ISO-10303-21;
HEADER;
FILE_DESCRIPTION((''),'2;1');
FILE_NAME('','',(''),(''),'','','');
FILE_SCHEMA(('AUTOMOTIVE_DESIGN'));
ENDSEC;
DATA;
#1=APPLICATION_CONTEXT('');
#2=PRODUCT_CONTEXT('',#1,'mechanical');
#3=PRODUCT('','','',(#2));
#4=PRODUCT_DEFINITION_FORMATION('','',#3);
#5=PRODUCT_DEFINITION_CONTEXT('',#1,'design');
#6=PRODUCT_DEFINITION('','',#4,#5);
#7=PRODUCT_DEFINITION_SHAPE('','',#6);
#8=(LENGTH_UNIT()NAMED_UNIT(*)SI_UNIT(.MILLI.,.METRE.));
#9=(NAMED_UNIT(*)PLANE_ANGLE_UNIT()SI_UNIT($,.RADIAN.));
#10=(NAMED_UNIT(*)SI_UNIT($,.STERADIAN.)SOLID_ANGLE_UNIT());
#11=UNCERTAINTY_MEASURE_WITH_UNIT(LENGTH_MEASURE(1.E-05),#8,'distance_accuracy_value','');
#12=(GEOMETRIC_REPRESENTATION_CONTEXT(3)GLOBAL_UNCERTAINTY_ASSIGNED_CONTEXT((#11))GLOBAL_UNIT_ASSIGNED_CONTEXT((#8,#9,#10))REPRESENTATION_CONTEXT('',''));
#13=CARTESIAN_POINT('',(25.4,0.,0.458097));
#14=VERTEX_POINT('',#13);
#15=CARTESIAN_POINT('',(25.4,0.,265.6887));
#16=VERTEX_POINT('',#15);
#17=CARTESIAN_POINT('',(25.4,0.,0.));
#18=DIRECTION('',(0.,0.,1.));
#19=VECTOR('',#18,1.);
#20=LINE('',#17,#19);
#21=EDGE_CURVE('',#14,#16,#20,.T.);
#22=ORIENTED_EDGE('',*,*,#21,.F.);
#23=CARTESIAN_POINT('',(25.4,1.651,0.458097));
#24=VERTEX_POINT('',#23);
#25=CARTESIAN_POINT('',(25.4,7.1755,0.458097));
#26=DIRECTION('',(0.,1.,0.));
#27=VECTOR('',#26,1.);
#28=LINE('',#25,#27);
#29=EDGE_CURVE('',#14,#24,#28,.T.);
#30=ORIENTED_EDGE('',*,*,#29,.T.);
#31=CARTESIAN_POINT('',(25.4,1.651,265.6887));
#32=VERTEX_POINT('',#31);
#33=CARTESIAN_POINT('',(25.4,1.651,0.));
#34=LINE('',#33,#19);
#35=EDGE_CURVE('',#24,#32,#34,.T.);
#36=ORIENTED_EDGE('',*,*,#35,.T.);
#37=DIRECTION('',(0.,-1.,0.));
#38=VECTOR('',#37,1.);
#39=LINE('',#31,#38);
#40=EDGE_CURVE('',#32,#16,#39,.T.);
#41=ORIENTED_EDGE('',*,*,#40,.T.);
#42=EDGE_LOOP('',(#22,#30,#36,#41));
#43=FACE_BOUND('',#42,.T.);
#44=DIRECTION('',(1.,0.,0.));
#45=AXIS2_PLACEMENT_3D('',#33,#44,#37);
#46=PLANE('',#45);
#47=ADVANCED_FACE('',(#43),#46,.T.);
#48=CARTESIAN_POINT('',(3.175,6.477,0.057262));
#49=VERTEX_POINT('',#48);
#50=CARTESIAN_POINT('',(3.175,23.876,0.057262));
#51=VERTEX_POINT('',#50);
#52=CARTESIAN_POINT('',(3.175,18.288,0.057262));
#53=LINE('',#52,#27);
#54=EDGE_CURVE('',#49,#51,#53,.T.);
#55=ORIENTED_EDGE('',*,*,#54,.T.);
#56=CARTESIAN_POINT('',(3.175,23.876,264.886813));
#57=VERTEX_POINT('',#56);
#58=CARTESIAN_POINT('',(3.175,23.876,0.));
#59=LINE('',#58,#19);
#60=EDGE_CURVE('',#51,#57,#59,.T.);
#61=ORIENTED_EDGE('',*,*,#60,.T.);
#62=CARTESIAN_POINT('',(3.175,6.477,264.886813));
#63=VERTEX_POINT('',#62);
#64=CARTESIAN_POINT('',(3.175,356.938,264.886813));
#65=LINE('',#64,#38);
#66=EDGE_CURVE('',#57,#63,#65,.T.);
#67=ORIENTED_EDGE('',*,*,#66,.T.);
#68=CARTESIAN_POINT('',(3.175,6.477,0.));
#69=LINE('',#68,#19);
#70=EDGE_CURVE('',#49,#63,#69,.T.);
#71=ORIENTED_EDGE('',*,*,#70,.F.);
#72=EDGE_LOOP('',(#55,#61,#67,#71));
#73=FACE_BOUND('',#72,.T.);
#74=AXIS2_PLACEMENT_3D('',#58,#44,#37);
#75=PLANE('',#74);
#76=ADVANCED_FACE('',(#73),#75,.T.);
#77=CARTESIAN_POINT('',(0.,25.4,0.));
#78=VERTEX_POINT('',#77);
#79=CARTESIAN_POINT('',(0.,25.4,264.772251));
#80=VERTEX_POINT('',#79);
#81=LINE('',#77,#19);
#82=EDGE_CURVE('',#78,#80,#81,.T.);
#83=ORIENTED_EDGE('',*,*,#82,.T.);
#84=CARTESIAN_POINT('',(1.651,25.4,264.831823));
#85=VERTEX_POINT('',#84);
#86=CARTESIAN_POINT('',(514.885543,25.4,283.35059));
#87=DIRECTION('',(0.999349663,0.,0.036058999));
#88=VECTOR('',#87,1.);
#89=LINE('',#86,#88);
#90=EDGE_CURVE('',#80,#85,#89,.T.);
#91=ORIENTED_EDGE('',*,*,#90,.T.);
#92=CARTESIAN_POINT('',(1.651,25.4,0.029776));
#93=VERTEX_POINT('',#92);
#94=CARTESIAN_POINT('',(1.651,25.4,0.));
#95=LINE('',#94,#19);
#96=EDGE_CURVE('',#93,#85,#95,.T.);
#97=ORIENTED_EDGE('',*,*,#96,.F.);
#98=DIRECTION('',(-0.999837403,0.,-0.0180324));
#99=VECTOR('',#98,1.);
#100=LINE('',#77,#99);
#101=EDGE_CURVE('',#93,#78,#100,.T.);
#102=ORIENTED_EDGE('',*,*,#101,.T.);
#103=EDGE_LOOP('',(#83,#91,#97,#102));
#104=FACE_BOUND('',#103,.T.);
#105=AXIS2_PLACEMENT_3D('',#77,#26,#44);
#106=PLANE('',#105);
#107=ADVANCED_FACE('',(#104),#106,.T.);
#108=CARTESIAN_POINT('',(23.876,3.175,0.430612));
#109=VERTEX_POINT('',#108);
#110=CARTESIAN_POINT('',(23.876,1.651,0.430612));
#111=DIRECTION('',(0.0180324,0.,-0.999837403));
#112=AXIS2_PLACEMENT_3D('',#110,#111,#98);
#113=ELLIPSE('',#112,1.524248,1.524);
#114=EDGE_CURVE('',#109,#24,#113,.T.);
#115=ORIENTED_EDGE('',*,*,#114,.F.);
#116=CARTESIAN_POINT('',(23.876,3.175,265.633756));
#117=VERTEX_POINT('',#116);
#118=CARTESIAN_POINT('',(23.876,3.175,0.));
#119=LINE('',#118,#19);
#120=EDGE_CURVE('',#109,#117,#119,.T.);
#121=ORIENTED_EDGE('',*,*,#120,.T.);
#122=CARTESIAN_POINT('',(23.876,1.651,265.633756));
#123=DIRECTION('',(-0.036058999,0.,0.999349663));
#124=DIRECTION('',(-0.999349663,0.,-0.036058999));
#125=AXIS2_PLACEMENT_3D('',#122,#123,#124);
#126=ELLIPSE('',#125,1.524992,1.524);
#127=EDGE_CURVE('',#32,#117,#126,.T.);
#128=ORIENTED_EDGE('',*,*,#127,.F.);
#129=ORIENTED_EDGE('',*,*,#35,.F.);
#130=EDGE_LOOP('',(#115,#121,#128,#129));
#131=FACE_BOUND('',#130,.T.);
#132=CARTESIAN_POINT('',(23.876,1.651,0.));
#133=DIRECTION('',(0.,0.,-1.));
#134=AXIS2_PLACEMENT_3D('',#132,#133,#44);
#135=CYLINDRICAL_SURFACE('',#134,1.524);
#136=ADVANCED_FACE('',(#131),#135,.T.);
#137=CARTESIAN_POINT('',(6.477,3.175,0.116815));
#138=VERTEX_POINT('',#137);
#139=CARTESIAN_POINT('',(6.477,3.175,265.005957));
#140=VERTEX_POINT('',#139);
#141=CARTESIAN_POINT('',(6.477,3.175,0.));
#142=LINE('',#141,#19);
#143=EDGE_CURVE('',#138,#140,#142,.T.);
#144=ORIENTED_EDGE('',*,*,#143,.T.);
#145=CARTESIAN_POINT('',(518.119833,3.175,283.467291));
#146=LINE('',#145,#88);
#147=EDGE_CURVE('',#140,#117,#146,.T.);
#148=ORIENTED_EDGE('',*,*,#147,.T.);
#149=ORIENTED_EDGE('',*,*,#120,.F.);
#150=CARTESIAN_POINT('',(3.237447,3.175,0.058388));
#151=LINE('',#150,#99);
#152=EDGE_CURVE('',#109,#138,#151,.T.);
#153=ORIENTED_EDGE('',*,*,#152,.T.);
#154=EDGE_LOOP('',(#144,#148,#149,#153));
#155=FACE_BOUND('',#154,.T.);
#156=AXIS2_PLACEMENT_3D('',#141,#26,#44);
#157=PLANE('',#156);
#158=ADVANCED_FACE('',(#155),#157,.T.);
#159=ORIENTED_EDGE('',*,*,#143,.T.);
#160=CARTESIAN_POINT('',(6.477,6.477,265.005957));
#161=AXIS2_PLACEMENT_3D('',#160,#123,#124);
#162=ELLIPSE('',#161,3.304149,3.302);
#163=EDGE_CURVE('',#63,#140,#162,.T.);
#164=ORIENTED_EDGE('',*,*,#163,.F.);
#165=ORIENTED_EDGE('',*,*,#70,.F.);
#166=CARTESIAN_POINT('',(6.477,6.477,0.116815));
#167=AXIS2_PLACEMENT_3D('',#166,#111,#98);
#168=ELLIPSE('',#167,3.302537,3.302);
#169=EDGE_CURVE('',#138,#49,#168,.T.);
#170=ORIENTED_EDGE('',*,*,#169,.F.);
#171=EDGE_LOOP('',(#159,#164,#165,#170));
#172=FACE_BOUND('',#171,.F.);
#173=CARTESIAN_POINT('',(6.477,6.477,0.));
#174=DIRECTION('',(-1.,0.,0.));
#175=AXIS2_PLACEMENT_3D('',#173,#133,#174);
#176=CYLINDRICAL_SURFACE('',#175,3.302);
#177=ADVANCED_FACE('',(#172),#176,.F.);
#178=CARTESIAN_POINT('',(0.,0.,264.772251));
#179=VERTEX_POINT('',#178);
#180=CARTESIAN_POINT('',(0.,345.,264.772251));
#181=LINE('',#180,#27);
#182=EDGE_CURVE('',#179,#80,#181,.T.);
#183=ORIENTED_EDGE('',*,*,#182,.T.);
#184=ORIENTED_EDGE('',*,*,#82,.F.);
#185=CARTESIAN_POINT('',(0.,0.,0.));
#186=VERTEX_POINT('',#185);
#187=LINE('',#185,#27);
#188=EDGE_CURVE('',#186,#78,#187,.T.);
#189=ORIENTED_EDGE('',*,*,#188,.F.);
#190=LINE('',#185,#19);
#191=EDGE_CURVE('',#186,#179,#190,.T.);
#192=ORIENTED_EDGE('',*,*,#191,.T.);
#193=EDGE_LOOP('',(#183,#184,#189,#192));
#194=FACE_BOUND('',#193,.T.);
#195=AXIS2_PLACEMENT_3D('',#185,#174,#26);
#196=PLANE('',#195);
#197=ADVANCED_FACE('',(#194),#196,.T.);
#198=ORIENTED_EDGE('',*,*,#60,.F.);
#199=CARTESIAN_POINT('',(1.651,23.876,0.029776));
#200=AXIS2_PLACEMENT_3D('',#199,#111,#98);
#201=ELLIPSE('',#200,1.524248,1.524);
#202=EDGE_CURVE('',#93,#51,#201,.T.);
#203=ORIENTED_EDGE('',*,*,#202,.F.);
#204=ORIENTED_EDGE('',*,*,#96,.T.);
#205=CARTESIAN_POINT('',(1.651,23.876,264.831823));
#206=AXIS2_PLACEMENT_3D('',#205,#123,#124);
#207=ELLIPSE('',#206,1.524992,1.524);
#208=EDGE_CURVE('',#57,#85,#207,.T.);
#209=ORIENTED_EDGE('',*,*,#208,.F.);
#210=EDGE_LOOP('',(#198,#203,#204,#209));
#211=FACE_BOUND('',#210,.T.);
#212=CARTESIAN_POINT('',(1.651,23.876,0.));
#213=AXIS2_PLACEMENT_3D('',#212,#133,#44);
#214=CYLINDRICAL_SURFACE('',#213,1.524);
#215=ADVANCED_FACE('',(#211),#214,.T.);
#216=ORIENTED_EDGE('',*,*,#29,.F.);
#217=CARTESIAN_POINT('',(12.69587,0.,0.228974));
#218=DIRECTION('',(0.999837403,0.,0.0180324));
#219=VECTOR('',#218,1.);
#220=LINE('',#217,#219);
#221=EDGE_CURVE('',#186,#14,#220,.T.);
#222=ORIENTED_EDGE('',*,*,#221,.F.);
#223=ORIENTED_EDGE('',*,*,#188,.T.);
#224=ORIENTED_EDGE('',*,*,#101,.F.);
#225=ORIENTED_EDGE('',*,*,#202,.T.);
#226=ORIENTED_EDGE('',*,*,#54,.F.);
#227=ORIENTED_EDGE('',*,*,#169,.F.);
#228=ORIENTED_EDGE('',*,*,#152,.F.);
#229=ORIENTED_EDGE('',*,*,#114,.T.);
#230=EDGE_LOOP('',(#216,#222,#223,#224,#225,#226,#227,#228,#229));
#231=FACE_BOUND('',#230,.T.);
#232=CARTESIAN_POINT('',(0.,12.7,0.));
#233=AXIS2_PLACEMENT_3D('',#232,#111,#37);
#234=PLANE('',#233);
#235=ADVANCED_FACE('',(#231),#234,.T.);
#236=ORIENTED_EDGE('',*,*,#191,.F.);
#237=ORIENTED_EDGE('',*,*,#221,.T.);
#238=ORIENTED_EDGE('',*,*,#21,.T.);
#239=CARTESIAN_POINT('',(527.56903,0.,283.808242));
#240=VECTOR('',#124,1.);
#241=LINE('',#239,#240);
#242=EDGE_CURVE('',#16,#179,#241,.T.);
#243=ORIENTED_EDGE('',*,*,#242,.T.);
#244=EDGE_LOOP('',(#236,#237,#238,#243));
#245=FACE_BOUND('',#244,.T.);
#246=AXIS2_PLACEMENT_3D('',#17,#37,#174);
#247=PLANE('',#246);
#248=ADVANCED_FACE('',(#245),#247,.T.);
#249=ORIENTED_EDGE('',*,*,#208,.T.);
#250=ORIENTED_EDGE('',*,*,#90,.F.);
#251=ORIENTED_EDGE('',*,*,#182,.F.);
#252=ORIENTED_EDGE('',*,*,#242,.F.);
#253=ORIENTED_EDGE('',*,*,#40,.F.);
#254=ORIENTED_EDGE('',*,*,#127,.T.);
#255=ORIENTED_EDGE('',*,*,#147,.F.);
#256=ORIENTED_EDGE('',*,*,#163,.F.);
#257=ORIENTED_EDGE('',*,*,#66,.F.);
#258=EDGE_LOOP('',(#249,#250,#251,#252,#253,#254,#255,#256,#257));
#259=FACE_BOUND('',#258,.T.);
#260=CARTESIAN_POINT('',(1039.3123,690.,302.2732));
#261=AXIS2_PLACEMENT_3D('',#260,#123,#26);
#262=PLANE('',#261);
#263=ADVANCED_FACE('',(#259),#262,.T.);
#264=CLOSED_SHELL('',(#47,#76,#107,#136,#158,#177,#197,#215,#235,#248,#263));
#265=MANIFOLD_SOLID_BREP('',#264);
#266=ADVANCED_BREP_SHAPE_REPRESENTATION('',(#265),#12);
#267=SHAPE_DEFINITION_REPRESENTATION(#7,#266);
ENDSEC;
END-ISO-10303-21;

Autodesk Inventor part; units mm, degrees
ref_plane "Start Plane" through (0, 0, 0) normal (0, 0, 1) x (1, 0, 0)
ref_plane "End Plane" through (0, 0, 265.6887) normal (0, 0, 1) x (1, 0, 0)
sketch "Sketch" plane through (0, 0, 0) normal (0, 0, 1) x (1, 0, 0)
  line L0 (25.4, 0) -> (0, 0)
  line L1 (0, 0) -> (0, 25.4)
  line L2 (0, 25.4) -> (1.651, 25.4)
  line L3 (3.175, 23.876) -> (3.175, 6.477)
  line L4 (6.477, 3.175) -> (23.876, 3.175)
  line L5 (25.4, 1.651) -> (25.4, 0)
  line L6 (0, -11.0414) -> (0, 31.5385) construction
  line L7 (-11.0414, 0) -> (31.5385, 0) construction
  arc A0 (3.175, 6.477) -> (6.477, 3.175) centre (6.477, 6.477) ccw
  arc A1 (3.175, 23.876) -> (1.651, 25.4) centre (1.651, 23.876) ccw
  arc A2 (25.4, 1.651) -> (23.876, 3.175) centre (23.876, 1.651) ccw
  line L8 (0, 40.0545) -> (0, -19.5574) construction
  line L9 (-19.5574, 0) -> (40.0545, 0) construction
  point P0 (3.175, 25.4)
  point P1 (3.175, 3.175)
  point P2 (25.4, 3.175)
  dimension "d0" = 25.4
  dimension "d1" = 25.4
  dimension "d2" = 3.175
  dimension "d3" = 3.175
  dimension "d10" = 0
  dimension "d11" = 0
  dimension "d14" = 3.302
  dimension "d15" = 1.524
extrude "Body" add sketch "Sketch" along normal up to surface (265.6887 mm away) from surface at 0
sketch "Sketch3" plane through (0, 0, 0) normal (0, 0, 1) x (1, 0, 0)
  line L0 (0, 0) -> (10, 0)
ref_plane "Work Plane3" through (0, 0, 0) normal (0, -1, 0) x (1, 0, 0)
ref_plane "Work Plane4" through (0, 12.7, 0) normal (0.0180324, 0, -0.9998374) x (-0.9998374, 0, -0.0180324)
split "Split1" plane through (0, 12.7, 0) removes the side toward (0.0180324, 0, -0.9998374)
ref_plane "Work Plane5" through (1039.3123, 690, 302.2732) normal (-0.036059, 0, 0.9993497) x (0.9993497, 0, 0.036059)
split "Split2" plane through (1039.3123, 690, 302.2732) removes the side toward (-0.036059, 0, 0.9993497)
sketch "Sketch4" plane through (0, 0, 0) normal (0, -1, 0) x (1, 0, 0)
  line L0 (-2, 0) -> (12, 0) projected
  line L1 (-2, 265.6887) -> (12, 265.6887) projected
  dimension "d17" = 265.6887
equation "\"d0\" = G_H"
equation "\"d1\" = G_H"
equation "\"d2\" = G_T"
equation "\"d3\" = G_T"
equation "\"d14\" = G_IR"
equation "\"d15\" = G_ER"
equation "\"d4\" = G_L"
equation "\"G_H\" = 25.4"
equation "\"G_T\" = 3.175"
equation "\"G_ER\" = 1.524"
equation "\"G_IR\" = 3.302"
equation "\"G_L\" = d17"
equation "\"ex\" = 0"
equation "\"G_OFFSET_START\" = 0"
equation "\"G_OFFSET_END\" = -24.50003"
equation "\"d13\" = G_OFFSET_END + B_L"
equation "\"B_L\" = 290.18872"
properties part number "AISC - L 1 x 1 x 1/8 - 10.46" material "Steel, Mild"
